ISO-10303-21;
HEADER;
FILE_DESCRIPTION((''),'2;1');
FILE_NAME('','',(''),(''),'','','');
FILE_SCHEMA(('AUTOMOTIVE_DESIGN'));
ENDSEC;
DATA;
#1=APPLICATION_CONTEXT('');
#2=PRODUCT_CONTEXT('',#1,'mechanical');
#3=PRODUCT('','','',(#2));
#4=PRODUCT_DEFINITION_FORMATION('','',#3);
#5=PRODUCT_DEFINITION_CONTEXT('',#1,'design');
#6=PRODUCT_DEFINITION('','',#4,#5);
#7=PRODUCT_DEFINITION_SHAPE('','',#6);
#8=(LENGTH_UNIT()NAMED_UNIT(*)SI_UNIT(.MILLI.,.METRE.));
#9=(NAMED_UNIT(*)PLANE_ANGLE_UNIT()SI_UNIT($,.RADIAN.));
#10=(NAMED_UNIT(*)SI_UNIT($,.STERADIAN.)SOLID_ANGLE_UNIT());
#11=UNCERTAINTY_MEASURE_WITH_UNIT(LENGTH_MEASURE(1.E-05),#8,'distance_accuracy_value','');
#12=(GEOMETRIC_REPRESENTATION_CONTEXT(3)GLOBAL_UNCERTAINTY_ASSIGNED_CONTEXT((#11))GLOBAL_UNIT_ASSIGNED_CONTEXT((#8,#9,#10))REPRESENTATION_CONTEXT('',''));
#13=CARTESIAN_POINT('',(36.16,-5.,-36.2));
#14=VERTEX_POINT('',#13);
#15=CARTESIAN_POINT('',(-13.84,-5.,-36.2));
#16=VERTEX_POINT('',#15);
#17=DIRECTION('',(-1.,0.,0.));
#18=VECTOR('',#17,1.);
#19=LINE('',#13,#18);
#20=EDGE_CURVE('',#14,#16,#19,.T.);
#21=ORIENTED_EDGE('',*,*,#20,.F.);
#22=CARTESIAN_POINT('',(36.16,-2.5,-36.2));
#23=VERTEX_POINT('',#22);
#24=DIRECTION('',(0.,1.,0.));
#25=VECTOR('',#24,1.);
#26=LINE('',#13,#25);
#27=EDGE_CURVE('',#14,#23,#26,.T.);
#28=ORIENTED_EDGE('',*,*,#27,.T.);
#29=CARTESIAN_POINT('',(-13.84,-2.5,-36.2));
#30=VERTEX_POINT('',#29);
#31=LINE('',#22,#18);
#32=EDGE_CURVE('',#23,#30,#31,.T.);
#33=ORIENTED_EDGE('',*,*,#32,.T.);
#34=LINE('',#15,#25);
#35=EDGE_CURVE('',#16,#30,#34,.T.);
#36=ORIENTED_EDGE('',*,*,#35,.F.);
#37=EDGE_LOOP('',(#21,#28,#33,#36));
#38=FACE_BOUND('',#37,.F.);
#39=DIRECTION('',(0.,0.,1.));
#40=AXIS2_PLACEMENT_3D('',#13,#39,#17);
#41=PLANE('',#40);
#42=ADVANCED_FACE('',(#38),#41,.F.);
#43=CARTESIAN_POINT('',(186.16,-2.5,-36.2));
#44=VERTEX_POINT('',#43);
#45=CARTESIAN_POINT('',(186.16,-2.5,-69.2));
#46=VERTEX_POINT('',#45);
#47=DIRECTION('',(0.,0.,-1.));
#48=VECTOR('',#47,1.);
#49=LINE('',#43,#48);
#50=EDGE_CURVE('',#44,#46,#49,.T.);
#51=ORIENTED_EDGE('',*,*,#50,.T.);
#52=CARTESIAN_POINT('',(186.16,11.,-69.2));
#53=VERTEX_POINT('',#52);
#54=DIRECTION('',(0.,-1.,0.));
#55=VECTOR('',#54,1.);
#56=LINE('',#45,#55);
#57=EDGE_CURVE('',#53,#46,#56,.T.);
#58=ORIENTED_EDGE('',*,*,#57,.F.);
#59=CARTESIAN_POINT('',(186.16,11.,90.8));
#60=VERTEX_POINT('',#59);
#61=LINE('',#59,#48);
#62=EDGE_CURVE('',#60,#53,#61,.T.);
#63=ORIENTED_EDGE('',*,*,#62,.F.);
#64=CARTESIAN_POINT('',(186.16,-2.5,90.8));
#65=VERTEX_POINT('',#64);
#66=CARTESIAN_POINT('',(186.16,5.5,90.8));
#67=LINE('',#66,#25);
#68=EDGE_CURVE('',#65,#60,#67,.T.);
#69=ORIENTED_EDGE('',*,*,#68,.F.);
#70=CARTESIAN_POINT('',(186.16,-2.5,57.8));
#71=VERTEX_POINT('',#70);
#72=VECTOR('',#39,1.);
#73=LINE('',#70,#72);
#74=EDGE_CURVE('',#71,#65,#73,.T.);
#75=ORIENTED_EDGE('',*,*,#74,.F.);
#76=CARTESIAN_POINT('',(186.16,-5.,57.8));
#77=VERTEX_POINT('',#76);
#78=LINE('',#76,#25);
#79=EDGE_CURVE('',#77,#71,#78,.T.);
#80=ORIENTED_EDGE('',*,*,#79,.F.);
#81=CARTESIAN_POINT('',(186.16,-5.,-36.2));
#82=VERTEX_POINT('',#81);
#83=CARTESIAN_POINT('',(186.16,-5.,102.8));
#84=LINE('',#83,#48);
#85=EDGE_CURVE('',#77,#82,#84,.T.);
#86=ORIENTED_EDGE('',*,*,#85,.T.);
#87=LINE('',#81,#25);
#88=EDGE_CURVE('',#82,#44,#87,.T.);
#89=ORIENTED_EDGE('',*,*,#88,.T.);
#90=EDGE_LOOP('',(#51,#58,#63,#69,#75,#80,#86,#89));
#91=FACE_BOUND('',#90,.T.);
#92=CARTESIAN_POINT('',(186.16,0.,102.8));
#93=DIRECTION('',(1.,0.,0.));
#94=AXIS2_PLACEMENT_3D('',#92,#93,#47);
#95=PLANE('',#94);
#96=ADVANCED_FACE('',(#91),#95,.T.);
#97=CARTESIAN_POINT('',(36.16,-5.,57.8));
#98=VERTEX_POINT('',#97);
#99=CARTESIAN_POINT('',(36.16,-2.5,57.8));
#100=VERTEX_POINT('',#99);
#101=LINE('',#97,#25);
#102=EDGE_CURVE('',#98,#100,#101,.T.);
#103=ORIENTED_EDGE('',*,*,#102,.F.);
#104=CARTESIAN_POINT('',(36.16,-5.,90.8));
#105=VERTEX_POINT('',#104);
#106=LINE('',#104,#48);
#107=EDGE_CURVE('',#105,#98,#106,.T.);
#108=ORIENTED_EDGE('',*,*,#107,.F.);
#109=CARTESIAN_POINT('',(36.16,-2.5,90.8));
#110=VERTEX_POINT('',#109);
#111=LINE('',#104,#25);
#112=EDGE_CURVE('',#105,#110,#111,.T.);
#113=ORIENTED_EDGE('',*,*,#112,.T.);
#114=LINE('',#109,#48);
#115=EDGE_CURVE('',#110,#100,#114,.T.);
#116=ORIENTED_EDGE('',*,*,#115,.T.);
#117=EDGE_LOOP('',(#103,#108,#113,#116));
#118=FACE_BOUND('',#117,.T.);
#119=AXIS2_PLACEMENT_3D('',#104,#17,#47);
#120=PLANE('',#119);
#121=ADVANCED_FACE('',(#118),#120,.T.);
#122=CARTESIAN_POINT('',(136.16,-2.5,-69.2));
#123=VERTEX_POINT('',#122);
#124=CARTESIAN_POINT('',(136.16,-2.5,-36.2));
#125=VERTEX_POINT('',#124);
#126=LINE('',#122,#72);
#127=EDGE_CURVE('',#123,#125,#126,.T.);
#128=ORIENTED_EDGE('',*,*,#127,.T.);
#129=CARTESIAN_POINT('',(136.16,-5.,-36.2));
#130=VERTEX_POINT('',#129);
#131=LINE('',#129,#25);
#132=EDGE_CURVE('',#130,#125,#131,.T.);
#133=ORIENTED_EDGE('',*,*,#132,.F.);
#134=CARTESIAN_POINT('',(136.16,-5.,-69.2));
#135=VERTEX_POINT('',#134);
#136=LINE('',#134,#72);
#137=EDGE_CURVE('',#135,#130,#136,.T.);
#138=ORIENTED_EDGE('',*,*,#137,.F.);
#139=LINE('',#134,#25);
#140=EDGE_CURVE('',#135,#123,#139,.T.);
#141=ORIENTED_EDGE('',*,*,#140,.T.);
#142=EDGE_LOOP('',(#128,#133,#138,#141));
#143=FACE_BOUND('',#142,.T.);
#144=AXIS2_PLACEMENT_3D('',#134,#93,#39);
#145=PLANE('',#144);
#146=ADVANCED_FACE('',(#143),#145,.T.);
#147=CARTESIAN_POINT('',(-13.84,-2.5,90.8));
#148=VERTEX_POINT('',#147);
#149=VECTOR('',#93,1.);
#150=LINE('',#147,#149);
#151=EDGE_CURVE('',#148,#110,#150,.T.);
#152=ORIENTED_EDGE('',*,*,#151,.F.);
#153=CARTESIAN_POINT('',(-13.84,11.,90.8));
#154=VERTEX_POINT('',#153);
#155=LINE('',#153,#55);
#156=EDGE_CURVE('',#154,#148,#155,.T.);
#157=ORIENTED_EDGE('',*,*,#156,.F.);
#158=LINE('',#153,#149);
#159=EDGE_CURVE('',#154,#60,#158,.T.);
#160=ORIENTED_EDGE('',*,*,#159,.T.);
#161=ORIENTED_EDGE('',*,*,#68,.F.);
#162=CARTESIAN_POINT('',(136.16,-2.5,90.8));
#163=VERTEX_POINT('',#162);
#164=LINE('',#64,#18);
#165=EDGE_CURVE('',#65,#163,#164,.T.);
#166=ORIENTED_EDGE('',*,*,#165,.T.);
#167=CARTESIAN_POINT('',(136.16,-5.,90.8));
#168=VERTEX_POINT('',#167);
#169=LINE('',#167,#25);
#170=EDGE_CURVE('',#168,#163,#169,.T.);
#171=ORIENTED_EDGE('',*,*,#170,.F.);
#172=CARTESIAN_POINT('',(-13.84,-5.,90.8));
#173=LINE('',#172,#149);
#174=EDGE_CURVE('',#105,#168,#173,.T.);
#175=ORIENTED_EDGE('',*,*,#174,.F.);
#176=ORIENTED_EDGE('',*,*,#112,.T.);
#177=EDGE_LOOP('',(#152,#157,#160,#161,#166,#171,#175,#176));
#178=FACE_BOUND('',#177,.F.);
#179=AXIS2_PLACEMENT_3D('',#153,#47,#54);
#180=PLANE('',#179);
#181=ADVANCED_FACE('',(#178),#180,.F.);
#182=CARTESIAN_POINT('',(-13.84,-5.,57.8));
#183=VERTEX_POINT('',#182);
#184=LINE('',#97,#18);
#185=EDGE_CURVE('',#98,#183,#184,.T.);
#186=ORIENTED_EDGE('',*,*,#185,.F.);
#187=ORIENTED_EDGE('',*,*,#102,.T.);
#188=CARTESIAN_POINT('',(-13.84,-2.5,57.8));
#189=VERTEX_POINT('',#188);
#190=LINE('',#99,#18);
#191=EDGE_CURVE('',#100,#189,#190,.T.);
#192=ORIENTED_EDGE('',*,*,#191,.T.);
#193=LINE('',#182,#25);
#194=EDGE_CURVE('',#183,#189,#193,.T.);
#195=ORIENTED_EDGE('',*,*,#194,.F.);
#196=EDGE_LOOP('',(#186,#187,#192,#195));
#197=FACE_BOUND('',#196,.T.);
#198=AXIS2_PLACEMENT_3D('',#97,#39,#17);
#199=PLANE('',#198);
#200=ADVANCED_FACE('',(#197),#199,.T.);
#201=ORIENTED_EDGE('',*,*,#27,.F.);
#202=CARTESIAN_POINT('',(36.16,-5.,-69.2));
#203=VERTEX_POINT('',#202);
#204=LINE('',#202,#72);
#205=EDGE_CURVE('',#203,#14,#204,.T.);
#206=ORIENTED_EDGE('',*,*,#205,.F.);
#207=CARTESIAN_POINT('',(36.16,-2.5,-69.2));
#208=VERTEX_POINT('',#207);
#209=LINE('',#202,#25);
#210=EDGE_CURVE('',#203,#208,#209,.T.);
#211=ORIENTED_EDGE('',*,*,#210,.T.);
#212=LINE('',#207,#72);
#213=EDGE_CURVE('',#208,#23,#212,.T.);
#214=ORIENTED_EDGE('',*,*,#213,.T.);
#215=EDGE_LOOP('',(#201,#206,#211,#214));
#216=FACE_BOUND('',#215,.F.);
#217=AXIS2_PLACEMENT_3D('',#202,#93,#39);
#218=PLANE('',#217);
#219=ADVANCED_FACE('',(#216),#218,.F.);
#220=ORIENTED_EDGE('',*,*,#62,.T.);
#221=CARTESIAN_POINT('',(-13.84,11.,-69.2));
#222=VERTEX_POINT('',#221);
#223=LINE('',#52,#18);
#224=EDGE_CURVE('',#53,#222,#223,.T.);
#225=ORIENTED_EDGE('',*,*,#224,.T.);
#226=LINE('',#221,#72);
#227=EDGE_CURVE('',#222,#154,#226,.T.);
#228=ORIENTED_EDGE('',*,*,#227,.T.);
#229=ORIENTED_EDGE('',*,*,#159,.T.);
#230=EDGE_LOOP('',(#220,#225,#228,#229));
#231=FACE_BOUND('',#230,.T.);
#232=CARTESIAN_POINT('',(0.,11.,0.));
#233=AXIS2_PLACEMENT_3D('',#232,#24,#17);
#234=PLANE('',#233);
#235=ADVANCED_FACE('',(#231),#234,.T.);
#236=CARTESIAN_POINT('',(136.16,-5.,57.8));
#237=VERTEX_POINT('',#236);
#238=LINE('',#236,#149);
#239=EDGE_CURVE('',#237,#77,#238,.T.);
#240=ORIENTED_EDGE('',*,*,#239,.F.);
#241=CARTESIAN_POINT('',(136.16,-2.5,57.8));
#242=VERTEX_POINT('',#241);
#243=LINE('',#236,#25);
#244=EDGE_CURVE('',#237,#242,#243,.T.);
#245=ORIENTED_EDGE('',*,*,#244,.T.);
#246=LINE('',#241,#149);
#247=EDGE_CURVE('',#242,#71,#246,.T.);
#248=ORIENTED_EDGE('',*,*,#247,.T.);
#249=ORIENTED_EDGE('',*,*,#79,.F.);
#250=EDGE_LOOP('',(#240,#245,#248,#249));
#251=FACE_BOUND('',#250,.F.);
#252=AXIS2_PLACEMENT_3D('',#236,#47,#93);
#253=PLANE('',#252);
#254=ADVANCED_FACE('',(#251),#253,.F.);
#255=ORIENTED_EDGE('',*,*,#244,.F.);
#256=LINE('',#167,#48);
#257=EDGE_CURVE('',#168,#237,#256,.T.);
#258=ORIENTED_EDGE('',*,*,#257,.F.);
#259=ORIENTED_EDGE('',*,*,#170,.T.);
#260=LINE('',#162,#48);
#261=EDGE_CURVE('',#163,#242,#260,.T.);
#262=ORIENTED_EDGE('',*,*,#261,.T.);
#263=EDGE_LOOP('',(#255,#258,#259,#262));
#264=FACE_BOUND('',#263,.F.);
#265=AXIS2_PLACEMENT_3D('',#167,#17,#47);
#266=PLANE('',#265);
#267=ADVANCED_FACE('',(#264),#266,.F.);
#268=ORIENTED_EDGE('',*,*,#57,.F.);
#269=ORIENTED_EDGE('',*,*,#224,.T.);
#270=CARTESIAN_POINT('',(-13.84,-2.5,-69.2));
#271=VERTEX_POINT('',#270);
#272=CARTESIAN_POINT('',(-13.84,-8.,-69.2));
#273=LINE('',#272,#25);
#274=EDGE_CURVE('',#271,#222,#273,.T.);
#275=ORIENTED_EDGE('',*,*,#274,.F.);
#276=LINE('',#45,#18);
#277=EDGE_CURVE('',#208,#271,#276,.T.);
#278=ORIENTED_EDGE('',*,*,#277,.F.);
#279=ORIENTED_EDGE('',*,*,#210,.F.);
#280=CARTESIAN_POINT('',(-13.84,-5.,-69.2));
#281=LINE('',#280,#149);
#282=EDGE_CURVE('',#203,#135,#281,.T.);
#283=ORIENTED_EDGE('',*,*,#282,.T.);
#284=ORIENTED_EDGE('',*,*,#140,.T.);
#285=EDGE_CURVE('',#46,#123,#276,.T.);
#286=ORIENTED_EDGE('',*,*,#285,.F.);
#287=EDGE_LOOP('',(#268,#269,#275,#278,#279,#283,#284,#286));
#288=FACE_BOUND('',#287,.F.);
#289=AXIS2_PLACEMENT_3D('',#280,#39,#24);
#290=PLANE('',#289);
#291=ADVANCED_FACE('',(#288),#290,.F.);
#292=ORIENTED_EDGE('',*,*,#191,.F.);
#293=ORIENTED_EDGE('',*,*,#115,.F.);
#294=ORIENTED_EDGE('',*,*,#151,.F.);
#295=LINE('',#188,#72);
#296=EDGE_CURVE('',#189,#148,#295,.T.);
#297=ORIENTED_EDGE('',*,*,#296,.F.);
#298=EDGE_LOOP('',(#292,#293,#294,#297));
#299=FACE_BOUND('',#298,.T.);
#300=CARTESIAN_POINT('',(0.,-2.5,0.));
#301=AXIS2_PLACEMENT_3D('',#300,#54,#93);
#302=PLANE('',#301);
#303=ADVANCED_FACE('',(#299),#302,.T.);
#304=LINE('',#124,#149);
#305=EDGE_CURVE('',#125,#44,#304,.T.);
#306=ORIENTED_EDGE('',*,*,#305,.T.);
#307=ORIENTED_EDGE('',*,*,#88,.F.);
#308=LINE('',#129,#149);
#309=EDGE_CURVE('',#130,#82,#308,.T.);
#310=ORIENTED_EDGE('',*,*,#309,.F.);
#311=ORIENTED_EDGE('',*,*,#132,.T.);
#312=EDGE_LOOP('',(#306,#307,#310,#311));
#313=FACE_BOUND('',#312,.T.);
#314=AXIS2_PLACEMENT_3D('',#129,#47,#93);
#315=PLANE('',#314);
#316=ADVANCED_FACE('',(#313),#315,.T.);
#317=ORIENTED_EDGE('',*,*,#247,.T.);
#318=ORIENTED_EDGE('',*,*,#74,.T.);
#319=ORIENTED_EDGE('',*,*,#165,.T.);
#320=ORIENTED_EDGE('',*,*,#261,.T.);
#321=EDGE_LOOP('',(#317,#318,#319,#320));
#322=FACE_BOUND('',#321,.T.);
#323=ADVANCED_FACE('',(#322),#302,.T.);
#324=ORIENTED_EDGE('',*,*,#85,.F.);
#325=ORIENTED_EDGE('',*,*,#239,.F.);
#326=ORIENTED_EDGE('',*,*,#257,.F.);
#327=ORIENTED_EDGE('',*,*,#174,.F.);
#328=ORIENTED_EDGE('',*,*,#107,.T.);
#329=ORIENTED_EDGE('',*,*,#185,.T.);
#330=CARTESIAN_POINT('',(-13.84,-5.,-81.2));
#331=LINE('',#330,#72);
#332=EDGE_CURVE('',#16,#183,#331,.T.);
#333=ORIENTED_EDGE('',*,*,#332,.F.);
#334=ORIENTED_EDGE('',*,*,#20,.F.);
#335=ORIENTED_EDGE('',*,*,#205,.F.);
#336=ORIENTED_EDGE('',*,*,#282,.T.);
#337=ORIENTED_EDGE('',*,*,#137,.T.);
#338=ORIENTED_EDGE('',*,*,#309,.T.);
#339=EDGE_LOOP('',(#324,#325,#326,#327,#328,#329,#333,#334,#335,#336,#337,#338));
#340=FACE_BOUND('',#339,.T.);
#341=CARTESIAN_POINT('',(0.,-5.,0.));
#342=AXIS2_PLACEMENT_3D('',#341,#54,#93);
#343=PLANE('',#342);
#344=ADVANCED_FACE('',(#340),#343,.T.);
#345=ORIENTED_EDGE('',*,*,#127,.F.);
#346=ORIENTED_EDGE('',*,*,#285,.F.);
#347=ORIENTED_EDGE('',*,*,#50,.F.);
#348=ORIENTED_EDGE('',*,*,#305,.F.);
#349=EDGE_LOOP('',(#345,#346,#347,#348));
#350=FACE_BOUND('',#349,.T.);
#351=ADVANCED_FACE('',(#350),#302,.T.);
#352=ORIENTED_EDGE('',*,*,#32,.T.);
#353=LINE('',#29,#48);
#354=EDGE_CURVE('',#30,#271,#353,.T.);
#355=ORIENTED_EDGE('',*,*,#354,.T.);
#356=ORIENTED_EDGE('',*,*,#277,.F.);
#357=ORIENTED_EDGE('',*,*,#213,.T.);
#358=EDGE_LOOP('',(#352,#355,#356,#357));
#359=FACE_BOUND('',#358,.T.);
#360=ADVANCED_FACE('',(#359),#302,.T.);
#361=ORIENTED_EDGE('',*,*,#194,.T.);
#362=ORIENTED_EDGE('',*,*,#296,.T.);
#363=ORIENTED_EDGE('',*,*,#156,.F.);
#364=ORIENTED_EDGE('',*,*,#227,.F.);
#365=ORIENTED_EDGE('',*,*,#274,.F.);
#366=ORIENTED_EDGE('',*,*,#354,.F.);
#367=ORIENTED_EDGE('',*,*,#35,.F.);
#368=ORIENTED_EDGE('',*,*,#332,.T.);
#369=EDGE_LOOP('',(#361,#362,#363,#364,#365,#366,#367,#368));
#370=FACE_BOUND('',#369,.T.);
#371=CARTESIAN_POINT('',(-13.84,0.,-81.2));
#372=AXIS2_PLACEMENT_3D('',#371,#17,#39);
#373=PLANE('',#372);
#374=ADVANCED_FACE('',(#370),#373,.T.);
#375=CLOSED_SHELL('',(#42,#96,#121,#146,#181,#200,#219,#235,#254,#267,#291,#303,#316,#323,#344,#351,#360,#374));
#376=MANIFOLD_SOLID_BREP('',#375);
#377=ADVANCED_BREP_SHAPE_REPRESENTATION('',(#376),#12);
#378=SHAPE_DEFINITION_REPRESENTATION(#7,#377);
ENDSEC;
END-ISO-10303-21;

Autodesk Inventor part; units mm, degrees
ref_plane "YZ Plane" through (0, 0, 0) normal (1, 0, 0) x (0, 1, 0)
ref_plane "XZ Plane" through (0, 0, 0) normal (0, 1, 0) x (-1, 0, 0)
ref_plane "XY Plane" through (0, 0, 0) normal (0, 0, 1) x (1, 0, 0)
sketch "Sketch1" plane through (0, 0, 0) normal (0, 1, 0) x (-1, 0, 0)
  line L0 (13.84, 90.8) -> (-186.16, 90.8)
  line L1 (-186.16, 90.8) -> (-186.16, -69.2)
  line L2 (-186.16, -69.2) -> (13.84, -69.2)
  line L3 (13.84, -69.2) -> (13.84, 90.8)
  point P0 (0, 0)
  dimension "d0" = 160
  dimension "d1" = 200
extrude "Extrusion1" add sketch "Sketch1" along normal blind 11
sketch "Sketch2" plane through (186.16, 0, 90.8) normal (1, 0, 0) x (0, 0, -1)
  line L0 (0, 0) -> (0, 11) projected
  line L1 (0, 0) -> (-12, 0)
  line L2 (-12, 0) -> (-12, 60)
  line L3 (-12, 60) -> (0, 60)
  line L4 (0, 60) -> (0, 0)
  line L5 (160, 0) -> (160, 11) projected
  line L6 (160, 0) -> (172, 0)
  line L7 (172, 0) -> (172, 60)
  line L8 (172, 60) -> (160, 60)
  line L9 (160, 60) -> (160, 0)
  point P0 (90.8, 0)
  point P1 (0, 11)
  dimension "d4" = 60
  dimension "d5" = 60
  dimension "d6" = 12
  dimension "d17" = 12
extrude "Extrusion2" add sketch "Sketch2" against normal up to surface (200 mm away)
sketch "Sketch3" plane through (0, 0, 0) normal (0, -1, 0) x (1, 0, 0)
  line L0 (186.16, 102.8) -> (186.16, -81.2) projected
  line L1 (186.16, 102.8) -> (-13.84, 102.8) projected
  line L2 (-13.84, -81.2) -> (-13.84, 102.8) projected
  line L3 (186.16, -81.2) -> (-13.84, -81.2) projected
  point P0 (0, 0)
extrude "Extrusion3" add sketch "Sketch3" along normal blind 5
sketch "Sketch7" plane through (0, 11, 0) normal (0, 1, 0) x (1, 0, 0)
  line L0 (186.16, -90.8) -> (-13.84, -90.8) projected
  line L1 (36.16, -90.8) -> (136.16, -90.8)
  line L2 (136.16, -90.8) -> (136.16, -65.8)
  line L3 (136.16, -65.8) -> (36.16, -65.8)
  line L4 (36.16, -65.8) -> (36.16, -90.8)
  line L5 (186.16, 69.2) -> (-13.84, 69.2) projected
  line L6 (36.16, 69.2) -> (136.16, 69.2)
  line L7 (136.16, 69.2) -> (136.16, 44.2)
  line L8 (136.16, 44.2) -> (36.16, 44.2)
  line L9 (36.16, 44.2) -> (36.16, 69.2)
  line L10 (-13.84, 69.2) -> (-13.84, -90.8) projected
  line L11 (186.16, -90.8) -> (186.16, 69.2) projected
  point P0 (0, 0)
  point P1 (136.16, 56.7)
  dimension "d18" = 25
  dimension "d19" = 25
  dimension "d20" = 50
  dimension "d21" = 50
  dimension "d22" = 50
  dimension "d23" = 50
extrude "Extrusion6" add sketch "Sketch7" along normal blind 10 contours L0 L4 L3 L2 | L7 L8 L9 L5
fillet "Fillet1" radius 4 4 edges at (36.16, 16, -69.2) (36.16, 16, 90.8) (136.16, 16, -69.2) (136.16, 16, 90.8)
fillet "Fillet2" radius 10 4 edges at (138.16, 21, -69.2) (34.16, 21, -69.2) (34.16, 21, 90.8) (138.16, 21, 90.8)
sketch "Sketch8" plane through (-13.84, 11, 90.8) normal (-1, 0, 0) x (0, 0, 1)
  line L0 (-160, 0) -> (0, 0)
  line L1 (0, 0) -> (0, -19)
  line L2 (0, -19) -> (-160, -19)
  line L3 (-160, -19) -> (-160, 0)
  line L4 (-172, 49) -> (12, 49)
  line L5 (12, 49) -> (12, -16)
  line L6 (12, -16) -> (-172, -16)
  line L7 (-172, -16) -> (-172, 49)
  point P0 (-90.8, -11)
  point P1 (0, -16)
  point P2 (-160, -16)
extrude "Extrusion7" cut sketch "Sketch8" against normal blind 1000 contours L3 L6 L7 L4 L5 L1 L0
sketch "Sketch10" plane through (0, -5, 0) normal (0, -1, 0) x (1, 0, 0)
  line L0 (186.16, -69.2) -> (-13.84, -69.2) projected
  line L1 (-13.84, -69.2) -> (36.16, -69.2)
  line L2 (36.16, -69.2) -> (36.16, -36.2)
  line L3 (36.16, -36.2) -> (-13.84, -36.2)
  line L4 (-13.84, -36.2) -> (-13.84, -69.2)
  line L5 (186.16, -69.2) -> (136.16, -69.2)
  line L6 (136.16, -69.2) -> (136.16, -36.2)
  line L7 (136.16, -36.2) -> (186.16, -36.2)
  line L8 (186.16, -36.2) -> (186.16, -69.2)
  line L9 (186.16, 90.8) -> (136.16, 90.8)
  line L10 (136.16, 90.8) -> (136.16, 57.8)
  line L11 (136.16, 57.8) -> (186.16, 57.8)
  line L12 (186.16, 57.8) -> (186.16, 90.8)
  line L13 (-13.84, 90.8) -> (36.16, 90.8)
  line L14 (36.16, 90.8) -> (36.16, 57.8)
  line L15 (36.16, 57.8) -> (-13.84, 57.8)
  line L16 (-13.84, 57.8) -> (-13.84, 90.8)
  line L17 (186.16, 90.8) -> (-13.84, 90.8) projected
  point P0 (0, 0)
  dimension "d30" = 50
  dimension "d31" = 50
  dimension "d32" = 50
  dimension "d33" = 50
  dimension "d34" = 33
  dimension "d35" = 33
  dimension "d36" = 0
extrude "Extrusion8" cut sketch "Sketch10" against normal blind 2.5
properties part number "Y_karetka" material "Aluminum 6061"
